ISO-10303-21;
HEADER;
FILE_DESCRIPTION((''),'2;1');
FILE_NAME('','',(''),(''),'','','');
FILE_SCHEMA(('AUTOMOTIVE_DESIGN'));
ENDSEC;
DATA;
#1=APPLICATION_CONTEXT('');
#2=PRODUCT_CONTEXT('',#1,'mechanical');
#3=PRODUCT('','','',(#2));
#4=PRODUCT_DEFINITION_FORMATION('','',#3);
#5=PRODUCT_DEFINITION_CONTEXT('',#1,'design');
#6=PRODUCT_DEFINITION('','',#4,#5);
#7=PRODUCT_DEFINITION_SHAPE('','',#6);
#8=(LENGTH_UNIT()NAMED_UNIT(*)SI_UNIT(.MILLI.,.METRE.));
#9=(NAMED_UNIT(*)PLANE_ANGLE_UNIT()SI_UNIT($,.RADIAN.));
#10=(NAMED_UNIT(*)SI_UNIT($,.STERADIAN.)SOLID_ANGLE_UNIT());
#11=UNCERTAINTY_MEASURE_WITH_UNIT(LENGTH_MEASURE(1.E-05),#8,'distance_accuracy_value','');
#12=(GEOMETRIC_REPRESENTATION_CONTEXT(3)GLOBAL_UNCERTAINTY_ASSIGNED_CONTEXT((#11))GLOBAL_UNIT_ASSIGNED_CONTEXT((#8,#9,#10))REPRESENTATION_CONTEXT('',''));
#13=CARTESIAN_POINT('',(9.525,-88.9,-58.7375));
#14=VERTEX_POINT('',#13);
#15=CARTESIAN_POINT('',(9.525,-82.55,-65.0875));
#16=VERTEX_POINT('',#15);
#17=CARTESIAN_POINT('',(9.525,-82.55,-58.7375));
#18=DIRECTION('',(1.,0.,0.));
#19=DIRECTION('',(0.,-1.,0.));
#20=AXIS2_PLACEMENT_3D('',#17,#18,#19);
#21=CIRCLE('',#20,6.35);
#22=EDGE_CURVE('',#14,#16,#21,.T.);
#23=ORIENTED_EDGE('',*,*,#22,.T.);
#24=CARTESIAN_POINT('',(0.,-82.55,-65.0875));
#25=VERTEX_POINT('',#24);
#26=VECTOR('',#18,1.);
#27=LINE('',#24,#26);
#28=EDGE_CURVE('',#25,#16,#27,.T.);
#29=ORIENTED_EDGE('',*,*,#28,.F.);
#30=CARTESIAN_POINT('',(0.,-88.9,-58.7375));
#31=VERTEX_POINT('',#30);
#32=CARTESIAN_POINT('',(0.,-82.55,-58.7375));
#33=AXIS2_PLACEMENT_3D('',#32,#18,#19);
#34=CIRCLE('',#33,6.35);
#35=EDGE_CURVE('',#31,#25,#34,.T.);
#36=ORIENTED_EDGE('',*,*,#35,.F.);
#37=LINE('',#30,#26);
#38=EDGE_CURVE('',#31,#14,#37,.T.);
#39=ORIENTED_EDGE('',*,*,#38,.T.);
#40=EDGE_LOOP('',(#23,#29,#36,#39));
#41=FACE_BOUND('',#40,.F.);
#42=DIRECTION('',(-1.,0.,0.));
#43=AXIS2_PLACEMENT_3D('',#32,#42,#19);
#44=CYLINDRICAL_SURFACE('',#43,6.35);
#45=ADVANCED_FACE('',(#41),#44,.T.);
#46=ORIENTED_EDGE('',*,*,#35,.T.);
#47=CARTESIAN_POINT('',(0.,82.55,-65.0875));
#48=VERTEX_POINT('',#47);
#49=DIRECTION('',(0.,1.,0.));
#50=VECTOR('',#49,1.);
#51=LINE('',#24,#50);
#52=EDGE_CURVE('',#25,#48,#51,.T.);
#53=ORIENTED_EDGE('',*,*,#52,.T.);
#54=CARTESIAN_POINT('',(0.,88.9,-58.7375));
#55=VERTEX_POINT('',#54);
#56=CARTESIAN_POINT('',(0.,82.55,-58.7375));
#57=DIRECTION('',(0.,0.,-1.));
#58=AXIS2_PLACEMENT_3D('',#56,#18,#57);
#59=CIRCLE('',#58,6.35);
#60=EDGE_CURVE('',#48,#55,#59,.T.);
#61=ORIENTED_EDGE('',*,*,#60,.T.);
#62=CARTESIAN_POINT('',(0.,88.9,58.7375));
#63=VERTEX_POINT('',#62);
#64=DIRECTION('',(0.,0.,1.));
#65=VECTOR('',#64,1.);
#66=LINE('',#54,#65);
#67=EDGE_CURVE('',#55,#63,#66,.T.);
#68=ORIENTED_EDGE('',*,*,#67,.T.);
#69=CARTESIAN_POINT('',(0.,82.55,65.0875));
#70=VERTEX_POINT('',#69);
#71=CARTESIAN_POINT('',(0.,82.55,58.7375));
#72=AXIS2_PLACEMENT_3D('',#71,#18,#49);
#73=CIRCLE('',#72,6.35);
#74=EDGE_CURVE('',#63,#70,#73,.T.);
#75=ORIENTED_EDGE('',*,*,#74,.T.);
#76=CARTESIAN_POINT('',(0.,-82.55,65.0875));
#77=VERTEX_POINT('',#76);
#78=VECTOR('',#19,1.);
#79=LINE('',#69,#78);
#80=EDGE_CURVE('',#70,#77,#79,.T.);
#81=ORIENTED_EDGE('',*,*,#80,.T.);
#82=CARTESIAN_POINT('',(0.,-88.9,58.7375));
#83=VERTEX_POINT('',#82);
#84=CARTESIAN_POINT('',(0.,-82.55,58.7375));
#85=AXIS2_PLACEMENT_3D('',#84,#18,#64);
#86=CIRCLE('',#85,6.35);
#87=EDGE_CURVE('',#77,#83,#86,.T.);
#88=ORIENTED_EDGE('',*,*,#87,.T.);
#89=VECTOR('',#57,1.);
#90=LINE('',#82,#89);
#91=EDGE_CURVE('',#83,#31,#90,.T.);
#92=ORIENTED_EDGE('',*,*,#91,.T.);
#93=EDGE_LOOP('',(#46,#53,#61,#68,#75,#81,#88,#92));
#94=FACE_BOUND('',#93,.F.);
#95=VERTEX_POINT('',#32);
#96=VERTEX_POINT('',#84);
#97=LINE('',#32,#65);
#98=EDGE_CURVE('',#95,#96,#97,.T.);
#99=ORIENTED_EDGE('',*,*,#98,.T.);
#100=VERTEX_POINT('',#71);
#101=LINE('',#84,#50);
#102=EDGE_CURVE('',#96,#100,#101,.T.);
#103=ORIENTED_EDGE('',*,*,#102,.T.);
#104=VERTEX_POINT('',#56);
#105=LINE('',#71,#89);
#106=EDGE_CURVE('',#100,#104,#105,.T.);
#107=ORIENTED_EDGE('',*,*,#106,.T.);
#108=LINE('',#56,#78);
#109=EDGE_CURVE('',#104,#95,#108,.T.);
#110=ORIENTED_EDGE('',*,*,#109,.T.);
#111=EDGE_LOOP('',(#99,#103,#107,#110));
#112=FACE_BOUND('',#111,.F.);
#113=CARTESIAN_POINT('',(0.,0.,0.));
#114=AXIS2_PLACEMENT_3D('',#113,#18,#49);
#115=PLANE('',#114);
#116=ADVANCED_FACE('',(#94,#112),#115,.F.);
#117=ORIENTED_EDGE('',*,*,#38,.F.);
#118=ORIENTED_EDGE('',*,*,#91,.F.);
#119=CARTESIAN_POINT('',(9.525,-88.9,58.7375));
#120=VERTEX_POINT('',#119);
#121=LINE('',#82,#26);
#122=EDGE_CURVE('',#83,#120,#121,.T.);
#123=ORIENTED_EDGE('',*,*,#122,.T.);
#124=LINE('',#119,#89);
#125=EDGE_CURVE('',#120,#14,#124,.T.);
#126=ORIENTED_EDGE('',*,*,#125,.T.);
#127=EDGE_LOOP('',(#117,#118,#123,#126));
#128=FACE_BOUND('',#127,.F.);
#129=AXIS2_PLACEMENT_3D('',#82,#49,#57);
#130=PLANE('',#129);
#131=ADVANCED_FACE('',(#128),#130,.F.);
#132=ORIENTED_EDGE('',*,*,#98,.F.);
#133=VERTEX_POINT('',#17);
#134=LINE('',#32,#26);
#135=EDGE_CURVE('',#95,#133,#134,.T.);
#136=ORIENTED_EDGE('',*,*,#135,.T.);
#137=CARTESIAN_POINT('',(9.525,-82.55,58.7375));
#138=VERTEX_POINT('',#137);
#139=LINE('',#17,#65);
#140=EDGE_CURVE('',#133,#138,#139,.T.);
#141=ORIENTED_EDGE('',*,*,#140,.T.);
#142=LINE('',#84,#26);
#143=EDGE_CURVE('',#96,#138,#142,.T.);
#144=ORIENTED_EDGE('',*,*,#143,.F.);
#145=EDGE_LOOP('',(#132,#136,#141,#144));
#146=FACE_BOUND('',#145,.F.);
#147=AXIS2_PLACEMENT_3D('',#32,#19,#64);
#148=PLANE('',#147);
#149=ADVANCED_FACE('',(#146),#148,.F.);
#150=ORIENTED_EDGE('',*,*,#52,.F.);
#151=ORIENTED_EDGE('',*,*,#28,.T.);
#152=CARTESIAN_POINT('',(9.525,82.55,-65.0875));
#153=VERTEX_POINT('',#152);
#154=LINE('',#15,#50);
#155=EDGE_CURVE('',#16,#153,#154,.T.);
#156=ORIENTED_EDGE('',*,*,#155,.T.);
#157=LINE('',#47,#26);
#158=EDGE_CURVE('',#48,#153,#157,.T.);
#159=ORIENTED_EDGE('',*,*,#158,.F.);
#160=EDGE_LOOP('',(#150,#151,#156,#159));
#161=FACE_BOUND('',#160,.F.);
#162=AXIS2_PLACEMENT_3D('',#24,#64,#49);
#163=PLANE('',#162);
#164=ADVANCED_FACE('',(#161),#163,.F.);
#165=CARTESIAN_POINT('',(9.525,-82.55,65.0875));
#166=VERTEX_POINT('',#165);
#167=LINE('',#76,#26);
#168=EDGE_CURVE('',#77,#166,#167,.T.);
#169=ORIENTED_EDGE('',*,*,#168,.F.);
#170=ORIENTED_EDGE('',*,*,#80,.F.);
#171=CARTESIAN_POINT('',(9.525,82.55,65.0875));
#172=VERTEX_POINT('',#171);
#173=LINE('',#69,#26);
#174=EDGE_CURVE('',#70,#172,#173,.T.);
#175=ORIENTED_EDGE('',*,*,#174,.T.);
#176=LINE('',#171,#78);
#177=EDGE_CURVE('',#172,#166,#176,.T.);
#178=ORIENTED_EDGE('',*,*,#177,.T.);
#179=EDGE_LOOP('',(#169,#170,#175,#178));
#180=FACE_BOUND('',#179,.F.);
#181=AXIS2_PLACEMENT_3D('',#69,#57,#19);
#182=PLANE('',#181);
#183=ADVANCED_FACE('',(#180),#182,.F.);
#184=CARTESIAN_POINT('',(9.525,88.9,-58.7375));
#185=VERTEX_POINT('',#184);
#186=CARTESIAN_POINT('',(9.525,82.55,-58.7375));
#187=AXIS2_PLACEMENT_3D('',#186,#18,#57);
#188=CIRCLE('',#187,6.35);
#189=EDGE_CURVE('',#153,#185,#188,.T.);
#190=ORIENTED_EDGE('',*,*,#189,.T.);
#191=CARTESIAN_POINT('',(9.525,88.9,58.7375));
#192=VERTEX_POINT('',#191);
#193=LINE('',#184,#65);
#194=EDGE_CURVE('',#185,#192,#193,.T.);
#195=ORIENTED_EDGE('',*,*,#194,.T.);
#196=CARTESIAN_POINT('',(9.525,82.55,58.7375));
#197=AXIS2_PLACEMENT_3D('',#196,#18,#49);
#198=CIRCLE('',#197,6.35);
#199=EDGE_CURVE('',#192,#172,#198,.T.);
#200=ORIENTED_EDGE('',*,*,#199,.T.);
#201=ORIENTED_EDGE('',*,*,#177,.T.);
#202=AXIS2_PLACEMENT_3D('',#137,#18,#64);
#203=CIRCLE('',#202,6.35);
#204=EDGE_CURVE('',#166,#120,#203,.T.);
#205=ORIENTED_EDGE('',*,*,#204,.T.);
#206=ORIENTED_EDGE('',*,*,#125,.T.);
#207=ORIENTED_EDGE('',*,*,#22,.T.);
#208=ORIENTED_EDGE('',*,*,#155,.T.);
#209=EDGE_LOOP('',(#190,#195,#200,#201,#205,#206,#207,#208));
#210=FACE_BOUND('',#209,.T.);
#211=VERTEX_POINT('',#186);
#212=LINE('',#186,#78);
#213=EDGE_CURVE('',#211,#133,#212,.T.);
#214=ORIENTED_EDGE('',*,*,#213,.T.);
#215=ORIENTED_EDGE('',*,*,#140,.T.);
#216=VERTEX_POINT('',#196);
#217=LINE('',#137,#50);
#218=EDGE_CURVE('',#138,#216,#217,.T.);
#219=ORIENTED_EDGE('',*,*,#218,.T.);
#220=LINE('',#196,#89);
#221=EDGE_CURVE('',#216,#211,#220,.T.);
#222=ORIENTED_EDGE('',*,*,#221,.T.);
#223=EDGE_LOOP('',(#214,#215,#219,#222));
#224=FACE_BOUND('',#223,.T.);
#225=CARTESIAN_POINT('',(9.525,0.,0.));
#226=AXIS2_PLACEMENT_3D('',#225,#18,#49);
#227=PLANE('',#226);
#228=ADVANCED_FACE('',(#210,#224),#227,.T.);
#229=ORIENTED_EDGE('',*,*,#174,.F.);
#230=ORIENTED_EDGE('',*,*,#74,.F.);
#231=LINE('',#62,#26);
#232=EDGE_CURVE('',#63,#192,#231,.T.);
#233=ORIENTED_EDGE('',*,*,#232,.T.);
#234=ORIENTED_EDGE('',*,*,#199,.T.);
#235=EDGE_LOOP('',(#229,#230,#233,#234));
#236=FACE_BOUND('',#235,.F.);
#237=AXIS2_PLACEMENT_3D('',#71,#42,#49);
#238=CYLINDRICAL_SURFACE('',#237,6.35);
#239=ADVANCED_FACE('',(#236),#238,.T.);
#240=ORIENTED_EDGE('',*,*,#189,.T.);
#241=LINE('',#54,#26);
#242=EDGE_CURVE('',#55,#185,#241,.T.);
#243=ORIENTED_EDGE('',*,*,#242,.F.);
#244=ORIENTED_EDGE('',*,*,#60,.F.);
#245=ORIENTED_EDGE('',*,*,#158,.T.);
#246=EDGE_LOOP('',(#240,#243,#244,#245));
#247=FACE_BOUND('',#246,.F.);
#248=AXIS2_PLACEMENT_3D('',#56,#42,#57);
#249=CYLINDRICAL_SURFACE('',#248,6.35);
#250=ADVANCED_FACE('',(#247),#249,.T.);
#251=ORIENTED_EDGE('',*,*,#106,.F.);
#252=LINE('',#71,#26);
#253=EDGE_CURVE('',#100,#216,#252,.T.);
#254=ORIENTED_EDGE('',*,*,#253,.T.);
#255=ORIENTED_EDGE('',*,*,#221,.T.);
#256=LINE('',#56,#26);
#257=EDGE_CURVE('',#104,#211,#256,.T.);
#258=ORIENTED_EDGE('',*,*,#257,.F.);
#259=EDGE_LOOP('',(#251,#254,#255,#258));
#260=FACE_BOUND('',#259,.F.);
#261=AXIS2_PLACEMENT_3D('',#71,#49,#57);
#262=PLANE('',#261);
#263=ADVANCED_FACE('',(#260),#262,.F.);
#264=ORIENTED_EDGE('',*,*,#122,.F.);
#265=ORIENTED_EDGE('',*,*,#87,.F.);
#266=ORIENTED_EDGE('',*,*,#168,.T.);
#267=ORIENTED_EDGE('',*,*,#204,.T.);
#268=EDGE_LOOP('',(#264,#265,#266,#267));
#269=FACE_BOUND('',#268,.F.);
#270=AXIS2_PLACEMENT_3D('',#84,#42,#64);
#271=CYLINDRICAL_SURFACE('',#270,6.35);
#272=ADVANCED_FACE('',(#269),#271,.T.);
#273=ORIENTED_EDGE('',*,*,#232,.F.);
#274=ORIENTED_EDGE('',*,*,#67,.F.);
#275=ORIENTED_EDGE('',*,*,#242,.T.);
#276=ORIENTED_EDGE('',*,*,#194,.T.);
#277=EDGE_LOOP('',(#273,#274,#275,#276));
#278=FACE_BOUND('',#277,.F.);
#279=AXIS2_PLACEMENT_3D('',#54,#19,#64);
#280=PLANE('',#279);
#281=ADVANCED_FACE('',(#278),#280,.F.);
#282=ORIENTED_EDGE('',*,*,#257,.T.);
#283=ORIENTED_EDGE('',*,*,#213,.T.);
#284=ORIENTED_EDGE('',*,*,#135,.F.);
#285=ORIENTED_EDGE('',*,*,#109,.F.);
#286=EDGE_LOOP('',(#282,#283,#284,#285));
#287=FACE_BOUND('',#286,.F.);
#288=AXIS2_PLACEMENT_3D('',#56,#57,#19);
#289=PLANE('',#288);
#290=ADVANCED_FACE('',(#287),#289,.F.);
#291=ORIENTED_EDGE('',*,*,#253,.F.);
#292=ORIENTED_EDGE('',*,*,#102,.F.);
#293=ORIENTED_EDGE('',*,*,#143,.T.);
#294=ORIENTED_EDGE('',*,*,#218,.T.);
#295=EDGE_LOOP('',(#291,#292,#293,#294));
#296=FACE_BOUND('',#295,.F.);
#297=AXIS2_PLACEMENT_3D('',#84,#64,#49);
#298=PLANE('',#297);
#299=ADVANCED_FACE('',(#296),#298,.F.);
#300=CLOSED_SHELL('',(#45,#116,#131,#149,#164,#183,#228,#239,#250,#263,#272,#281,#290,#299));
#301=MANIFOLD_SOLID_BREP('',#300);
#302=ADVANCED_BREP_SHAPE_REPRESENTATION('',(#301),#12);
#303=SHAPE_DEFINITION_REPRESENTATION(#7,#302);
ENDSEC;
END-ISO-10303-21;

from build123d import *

# Parameters (mm, degrees)
F1_DEPTH = 9.525


# Not quite as in the source:
# - a length typed as a fraction of an inch, garbled in the dataset ("3 / 203.2 mm" for 3/8 in), is restored


with BuildPart() as f1:
    # F0 (on Right) → F1 (new body)
    with BuildSketch(Plane.YZ):
        with BuildLine():
            ThreePointArc((88.9, 58.7375), (87.0401280605, 63.2276280605), (82.55, 65.0875))
            Line((82.55, 65.0875), (-82.55, 65.0875))
            ThreePointArc((-82.55, 65.0875), (-87.0401280605, 63.2276280605), (-88.9, 58.7375))
            Line((-88.9, 58.7375), (-88.9, -58.7375))
            ThreePointArc((-88.9, -58.7375), (-87.0401280605, -63.2276280605), (-82.55, -65.0875))
            Line((-82.55, -65.0875), (82.55, -65.0875))
            ThreePointArc((82.55, -65.0875), (87.0401280605, -63.2276280605), (88.9, -58.7375))
            Line((88.9, -58.7375), (88.9, 58.7375))
        make_face()
        Polygon((82.55, 58.7375), (82.55, 53.975), (82.55, -53.975), (82.55, -58.7375), (74.6125, -58.7375), (-74.6125, -58.7375), (-82.55, -58.7375), (-82.55, -53.975), (-82.55, 53.975), (-82.55, 58.7375), (-74.6125, 58.7375), (74.6125, 58.7375), align=None, mode=Mode.SUBTRACT)
    extrude(amount=F1_DEPTH)


solid = f1.part
